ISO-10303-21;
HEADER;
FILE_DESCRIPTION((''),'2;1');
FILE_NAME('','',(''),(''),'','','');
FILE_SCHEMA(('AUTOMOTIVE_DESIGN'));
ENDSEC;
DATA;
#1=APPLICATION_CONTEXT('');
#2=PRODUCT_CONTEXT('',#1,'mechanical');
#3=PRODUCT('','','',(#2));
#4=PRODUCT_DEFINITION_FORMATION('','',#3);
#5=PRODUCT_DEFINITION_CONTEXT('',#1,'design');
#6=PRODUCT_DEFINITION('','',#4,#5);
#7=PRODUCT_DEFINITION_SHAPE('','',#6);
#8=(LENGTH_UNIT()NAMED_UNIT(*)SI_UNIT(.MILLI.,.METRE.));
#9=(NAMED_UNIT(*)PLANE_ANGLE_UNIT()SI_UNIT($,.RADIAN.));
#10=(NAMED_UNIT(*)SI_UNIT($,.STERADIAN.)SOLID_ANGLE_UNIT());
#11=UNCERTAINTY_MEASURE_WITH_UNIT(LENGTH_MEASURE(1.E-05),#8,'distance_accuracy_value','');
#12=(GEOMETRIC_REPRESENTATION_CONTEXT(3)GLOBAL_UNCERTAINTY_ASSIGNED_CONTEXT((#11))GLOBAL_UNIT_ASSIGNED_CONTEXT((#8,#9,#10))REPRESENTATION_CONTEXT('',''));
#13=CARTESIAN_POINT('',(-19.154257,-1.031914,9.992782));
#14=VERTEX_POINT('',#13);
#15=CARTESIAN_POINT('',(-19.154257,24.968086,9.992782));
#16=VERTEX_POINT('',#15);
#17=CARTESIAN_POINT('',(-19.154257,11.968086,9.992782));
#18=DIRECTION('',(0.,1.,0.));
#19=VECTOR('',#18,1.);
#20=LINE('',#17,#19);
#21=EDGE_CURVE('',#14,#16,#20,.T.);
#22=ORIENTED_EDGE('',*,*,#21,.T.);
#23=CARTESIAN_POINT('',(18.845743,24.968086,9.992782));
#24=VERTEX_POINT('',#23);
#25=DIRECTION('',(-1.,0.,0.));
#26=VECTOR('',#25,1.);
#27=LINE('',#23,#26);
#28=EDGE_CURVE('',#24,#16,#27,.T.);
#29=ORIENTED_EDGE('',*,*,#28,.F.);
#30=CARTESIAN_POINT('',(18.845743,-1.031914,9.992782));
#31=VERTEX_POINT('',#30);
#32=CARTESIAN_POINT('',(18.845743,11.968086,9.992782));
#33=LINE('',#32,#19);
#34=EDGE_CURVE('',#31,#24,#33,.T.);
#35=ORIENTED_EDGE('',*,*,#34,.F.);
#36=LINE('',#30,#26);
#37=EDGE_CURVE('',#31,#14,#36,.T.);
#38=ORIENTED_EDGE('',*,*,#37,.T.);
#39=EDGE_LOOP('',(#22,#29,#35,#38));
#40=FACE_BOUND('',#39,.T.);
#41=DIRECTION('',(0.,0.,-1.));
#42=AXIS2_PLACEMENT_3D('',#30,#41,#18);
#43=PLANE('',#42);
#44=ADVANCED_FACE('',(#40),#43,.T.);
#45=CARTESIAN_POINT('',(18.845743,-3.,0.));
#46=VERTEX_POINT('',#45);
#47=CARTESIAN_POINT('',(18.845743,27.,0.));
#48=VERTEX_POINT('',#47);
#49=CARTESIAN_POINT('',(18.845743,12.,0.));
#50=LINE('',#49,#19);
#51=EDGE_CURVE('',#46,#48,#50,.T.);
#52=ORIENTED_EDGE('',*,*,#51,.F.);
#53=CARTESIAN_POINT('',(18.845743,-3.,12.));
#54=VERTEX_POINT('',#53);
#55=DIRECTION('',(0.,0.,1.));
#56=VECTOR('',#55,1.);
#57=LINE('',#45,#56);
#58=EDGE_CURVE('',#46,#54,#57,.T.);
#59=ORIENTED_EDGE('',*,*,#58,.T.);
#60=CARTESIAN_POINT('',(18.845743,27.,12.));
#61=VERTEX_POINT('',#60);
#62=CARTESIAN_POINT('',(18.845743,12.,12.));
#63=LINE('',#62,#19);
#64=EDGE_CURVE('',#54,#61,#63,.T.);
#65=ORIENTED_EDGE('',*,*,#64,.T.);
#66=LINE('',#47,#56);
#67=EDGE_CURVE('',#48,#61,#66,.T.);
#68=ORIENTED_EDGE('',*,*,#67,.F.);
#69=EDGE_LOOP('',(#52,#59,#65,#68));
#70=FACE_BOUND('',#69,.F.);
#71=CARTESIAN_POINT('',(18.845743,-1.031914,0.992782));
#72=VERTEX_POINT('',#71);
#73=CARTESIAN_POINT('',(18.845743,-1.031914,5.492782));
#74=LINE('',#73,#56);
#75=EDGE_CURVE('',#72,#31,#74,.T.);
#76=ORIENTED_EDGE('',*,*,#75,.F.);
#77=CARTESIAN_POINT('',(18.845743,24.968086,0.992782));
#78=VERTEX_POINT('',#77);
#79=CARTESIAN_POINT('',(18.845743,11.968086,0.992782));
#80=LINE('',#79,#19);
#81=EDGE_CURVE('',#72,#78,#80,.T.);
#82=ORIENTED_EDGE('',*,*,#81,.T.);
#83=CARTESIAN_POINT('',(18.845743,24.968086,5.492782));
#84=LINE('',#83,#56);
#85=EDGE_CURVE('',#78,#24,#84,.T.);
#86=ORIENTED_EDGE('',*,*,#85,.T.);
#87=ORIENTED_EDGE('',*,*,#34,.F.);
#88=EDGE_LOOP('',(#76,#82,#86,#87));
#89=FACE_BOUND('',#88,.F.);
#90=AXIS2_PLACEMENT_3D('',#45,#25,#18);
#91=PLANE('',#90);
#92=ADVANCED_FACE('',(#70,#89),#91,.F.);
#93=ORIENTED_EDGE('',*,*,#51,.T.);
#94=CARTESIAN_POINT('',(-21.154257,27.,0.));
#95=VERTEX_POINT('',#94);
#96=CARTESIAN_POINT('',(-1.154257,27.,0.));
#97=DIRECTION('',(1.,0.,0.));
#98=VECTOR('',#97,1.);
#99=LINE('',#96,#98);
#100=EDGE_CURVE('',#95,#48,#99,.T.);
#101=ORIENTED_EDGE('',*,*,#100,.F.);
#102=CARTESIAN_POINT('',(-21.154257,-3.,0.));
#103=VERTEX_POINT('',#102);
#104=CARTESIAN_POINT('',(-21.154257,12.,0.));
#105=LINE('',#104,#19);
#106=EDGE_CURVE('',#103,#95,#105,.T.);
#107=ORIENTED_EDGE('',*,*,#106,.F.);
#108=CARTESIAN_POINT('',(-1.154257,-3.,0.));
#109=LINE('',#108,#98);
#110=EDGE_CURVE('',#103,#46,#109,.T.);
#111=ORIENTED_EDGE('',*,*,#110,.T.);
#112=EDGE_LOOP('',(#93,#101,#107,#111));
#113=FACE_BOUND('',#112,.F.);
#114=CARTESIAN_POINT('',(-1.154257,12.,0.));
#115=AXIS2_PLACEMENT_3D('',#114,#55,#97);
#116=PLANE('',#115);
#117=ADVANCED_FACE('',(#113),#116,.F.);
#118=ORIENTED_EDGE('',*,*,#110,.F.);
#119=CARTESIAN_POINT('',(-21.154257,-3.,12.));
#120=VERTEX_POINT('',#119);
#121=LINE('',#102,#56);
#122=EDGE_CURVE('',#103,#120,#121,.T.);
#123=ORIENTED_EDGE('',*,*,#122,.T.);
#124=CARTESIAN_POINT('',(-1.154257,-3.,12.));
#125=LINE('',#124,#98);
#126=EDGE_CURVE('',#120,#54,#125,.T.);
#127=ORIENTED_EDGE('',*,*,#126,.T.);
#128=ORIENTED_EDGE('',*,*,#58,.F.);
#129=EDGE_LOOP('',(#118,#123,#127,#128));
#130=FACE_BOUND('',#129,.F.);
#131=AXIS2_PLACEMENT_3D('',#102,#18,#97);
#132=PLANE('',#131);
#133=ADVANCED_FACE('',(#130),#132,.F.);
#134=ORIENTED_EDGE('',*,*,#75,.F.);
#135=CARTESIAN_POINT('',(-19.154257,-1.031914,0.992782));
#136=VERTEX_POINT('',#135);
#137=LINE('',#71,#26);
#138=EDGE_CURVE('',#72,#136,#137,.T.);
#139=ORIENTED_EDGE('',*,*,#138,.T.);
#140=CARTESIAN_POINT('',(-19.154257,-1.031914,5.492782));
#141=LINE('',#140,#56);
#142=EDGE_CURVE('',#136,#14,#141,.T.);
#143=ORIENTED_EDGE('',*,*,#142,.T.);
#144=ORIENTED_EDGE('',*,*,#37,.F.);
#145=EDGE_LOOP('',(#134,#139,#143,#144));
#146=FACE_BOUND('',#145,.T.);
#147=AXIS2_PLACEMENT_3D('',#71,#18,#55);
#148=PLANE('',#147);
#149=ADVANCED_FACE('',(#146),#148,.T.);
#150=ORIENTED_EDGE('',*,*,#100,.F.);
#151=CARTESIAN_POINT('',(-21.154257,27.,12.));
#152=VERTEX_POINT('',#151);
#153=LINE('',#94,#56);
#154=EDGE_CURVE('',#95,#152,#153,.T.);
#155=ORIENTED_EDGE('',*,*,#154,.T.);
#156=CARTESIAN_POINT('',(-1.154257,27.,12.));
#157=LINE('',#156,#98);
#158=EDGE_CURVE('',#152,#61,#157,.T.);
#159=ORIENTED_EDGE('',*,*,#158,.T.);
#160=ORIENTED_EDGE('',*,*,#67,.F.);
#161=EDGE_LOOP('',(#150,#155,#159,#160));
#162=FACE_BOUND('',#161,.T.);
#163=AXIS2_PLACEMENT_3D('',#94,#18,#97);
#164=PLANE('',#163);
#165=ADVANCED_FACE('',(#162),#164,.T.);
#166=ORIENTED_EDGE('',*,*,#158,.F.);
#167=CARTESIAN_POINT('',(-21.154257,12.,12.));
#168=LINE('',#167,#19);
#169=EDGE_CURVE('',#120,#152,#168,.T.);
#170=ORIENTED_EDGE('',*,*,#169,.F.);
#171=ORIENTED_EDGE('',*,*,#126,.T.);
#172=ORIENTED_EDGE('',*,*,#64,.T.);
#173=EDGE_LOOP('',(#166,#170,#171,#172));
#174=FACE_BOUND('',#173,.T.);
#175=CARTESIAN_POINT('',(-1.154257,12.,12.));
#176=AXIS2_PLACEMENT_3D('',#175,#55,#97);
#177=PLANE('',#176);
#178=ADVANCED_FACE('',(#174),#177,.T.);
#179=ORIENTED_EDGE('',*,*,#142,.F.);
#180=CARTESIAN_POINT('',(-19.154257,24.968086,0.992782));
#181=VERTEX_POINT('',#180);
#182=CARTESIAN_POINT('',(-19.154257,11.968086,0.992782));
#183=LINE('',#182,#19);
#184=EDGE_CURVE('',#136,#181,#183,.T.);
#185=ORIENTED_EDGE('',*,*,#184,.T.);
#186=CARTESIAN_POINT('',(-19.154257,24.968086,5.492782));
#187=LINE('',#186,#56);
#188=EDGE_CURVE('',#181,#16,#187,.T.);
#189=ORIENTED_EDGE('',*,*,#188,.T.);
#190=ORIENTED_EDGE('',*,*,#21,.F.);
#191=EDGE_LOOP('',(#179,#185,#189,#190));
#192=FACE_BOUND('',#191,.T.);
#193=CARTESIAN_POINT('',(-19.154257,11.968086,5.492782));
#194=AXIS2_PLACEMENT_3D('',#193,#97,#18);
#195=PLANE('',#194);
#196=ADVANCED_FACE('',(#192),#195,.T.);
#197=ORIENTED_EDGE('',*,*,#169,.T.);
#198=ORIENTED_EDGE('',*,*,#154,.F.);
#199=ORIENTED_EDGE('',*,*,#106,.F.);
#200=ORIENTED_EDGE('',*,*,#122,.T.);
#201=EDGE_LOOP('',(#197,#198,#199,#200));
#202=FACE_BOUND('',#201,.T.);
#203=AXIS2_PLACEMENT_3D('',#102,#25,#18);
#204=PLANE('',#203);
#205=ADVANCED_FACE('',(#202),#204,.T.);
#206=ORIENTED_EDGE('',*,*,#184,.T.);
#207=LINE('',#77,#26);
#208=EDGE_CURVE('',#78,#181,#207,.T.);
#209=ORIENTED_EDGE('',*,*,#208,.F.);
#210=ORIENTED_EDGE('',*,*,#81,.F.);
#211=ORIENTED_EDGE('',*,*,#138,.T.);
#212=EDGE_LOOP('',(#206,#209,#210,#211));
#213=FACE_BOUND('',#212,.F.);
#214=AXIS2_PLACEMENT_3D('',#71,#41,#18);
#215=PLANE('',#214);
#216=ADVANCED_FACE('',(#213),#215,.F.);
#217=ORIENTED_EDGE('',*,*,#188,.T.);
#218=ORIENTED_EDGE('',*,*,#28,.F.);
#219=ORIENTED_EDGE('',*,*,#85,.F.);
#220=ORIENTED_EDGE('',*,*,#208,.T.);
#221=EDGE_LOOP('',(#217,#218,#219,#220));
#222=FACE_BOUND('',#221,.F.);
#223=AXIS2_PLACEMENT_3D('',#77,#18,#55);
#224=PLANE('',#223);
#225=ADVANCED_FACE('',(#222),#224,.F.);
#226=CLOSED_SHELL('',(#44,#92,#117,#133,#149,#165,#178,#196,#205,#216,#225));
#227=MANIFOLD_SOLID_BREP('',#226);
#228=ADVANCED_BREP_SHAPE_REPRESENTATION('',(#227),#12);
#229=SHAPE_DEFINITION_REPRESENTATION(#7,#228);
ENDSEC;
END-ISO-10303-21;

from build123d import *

# Parameters (mm, degrees)
F0_W     = 40
F0_H     = 30
F1_DEPTH = 12
F2_W     = 26
F2_H     = 9
F3_DEPTH = 38


# Not quite as in the source:
# - a feature names something its author has since deleted; it is built from what else it names


with BuildPart() as f1:
    # F0 (on Top) → F1 (new body)
    with BuildSketch(Plane.XY):
        with Locations((-1.1542569846, 12)):
            Rectangle(F0_W, F0_H)
    extrude(amount=F1_DEPTH)

    # F2 (on face) → F3 (cut)
    with BuildSketch(Plane.YZ.offset(18.8457430154)):
        with Locations((11.9680855733, 5.492781871)):
            Rectangle(F2_W, F2_H)
    extrude(amount=-F3_DEPTH, mode=Mode.SUBTRACT)


solid = f1.part
